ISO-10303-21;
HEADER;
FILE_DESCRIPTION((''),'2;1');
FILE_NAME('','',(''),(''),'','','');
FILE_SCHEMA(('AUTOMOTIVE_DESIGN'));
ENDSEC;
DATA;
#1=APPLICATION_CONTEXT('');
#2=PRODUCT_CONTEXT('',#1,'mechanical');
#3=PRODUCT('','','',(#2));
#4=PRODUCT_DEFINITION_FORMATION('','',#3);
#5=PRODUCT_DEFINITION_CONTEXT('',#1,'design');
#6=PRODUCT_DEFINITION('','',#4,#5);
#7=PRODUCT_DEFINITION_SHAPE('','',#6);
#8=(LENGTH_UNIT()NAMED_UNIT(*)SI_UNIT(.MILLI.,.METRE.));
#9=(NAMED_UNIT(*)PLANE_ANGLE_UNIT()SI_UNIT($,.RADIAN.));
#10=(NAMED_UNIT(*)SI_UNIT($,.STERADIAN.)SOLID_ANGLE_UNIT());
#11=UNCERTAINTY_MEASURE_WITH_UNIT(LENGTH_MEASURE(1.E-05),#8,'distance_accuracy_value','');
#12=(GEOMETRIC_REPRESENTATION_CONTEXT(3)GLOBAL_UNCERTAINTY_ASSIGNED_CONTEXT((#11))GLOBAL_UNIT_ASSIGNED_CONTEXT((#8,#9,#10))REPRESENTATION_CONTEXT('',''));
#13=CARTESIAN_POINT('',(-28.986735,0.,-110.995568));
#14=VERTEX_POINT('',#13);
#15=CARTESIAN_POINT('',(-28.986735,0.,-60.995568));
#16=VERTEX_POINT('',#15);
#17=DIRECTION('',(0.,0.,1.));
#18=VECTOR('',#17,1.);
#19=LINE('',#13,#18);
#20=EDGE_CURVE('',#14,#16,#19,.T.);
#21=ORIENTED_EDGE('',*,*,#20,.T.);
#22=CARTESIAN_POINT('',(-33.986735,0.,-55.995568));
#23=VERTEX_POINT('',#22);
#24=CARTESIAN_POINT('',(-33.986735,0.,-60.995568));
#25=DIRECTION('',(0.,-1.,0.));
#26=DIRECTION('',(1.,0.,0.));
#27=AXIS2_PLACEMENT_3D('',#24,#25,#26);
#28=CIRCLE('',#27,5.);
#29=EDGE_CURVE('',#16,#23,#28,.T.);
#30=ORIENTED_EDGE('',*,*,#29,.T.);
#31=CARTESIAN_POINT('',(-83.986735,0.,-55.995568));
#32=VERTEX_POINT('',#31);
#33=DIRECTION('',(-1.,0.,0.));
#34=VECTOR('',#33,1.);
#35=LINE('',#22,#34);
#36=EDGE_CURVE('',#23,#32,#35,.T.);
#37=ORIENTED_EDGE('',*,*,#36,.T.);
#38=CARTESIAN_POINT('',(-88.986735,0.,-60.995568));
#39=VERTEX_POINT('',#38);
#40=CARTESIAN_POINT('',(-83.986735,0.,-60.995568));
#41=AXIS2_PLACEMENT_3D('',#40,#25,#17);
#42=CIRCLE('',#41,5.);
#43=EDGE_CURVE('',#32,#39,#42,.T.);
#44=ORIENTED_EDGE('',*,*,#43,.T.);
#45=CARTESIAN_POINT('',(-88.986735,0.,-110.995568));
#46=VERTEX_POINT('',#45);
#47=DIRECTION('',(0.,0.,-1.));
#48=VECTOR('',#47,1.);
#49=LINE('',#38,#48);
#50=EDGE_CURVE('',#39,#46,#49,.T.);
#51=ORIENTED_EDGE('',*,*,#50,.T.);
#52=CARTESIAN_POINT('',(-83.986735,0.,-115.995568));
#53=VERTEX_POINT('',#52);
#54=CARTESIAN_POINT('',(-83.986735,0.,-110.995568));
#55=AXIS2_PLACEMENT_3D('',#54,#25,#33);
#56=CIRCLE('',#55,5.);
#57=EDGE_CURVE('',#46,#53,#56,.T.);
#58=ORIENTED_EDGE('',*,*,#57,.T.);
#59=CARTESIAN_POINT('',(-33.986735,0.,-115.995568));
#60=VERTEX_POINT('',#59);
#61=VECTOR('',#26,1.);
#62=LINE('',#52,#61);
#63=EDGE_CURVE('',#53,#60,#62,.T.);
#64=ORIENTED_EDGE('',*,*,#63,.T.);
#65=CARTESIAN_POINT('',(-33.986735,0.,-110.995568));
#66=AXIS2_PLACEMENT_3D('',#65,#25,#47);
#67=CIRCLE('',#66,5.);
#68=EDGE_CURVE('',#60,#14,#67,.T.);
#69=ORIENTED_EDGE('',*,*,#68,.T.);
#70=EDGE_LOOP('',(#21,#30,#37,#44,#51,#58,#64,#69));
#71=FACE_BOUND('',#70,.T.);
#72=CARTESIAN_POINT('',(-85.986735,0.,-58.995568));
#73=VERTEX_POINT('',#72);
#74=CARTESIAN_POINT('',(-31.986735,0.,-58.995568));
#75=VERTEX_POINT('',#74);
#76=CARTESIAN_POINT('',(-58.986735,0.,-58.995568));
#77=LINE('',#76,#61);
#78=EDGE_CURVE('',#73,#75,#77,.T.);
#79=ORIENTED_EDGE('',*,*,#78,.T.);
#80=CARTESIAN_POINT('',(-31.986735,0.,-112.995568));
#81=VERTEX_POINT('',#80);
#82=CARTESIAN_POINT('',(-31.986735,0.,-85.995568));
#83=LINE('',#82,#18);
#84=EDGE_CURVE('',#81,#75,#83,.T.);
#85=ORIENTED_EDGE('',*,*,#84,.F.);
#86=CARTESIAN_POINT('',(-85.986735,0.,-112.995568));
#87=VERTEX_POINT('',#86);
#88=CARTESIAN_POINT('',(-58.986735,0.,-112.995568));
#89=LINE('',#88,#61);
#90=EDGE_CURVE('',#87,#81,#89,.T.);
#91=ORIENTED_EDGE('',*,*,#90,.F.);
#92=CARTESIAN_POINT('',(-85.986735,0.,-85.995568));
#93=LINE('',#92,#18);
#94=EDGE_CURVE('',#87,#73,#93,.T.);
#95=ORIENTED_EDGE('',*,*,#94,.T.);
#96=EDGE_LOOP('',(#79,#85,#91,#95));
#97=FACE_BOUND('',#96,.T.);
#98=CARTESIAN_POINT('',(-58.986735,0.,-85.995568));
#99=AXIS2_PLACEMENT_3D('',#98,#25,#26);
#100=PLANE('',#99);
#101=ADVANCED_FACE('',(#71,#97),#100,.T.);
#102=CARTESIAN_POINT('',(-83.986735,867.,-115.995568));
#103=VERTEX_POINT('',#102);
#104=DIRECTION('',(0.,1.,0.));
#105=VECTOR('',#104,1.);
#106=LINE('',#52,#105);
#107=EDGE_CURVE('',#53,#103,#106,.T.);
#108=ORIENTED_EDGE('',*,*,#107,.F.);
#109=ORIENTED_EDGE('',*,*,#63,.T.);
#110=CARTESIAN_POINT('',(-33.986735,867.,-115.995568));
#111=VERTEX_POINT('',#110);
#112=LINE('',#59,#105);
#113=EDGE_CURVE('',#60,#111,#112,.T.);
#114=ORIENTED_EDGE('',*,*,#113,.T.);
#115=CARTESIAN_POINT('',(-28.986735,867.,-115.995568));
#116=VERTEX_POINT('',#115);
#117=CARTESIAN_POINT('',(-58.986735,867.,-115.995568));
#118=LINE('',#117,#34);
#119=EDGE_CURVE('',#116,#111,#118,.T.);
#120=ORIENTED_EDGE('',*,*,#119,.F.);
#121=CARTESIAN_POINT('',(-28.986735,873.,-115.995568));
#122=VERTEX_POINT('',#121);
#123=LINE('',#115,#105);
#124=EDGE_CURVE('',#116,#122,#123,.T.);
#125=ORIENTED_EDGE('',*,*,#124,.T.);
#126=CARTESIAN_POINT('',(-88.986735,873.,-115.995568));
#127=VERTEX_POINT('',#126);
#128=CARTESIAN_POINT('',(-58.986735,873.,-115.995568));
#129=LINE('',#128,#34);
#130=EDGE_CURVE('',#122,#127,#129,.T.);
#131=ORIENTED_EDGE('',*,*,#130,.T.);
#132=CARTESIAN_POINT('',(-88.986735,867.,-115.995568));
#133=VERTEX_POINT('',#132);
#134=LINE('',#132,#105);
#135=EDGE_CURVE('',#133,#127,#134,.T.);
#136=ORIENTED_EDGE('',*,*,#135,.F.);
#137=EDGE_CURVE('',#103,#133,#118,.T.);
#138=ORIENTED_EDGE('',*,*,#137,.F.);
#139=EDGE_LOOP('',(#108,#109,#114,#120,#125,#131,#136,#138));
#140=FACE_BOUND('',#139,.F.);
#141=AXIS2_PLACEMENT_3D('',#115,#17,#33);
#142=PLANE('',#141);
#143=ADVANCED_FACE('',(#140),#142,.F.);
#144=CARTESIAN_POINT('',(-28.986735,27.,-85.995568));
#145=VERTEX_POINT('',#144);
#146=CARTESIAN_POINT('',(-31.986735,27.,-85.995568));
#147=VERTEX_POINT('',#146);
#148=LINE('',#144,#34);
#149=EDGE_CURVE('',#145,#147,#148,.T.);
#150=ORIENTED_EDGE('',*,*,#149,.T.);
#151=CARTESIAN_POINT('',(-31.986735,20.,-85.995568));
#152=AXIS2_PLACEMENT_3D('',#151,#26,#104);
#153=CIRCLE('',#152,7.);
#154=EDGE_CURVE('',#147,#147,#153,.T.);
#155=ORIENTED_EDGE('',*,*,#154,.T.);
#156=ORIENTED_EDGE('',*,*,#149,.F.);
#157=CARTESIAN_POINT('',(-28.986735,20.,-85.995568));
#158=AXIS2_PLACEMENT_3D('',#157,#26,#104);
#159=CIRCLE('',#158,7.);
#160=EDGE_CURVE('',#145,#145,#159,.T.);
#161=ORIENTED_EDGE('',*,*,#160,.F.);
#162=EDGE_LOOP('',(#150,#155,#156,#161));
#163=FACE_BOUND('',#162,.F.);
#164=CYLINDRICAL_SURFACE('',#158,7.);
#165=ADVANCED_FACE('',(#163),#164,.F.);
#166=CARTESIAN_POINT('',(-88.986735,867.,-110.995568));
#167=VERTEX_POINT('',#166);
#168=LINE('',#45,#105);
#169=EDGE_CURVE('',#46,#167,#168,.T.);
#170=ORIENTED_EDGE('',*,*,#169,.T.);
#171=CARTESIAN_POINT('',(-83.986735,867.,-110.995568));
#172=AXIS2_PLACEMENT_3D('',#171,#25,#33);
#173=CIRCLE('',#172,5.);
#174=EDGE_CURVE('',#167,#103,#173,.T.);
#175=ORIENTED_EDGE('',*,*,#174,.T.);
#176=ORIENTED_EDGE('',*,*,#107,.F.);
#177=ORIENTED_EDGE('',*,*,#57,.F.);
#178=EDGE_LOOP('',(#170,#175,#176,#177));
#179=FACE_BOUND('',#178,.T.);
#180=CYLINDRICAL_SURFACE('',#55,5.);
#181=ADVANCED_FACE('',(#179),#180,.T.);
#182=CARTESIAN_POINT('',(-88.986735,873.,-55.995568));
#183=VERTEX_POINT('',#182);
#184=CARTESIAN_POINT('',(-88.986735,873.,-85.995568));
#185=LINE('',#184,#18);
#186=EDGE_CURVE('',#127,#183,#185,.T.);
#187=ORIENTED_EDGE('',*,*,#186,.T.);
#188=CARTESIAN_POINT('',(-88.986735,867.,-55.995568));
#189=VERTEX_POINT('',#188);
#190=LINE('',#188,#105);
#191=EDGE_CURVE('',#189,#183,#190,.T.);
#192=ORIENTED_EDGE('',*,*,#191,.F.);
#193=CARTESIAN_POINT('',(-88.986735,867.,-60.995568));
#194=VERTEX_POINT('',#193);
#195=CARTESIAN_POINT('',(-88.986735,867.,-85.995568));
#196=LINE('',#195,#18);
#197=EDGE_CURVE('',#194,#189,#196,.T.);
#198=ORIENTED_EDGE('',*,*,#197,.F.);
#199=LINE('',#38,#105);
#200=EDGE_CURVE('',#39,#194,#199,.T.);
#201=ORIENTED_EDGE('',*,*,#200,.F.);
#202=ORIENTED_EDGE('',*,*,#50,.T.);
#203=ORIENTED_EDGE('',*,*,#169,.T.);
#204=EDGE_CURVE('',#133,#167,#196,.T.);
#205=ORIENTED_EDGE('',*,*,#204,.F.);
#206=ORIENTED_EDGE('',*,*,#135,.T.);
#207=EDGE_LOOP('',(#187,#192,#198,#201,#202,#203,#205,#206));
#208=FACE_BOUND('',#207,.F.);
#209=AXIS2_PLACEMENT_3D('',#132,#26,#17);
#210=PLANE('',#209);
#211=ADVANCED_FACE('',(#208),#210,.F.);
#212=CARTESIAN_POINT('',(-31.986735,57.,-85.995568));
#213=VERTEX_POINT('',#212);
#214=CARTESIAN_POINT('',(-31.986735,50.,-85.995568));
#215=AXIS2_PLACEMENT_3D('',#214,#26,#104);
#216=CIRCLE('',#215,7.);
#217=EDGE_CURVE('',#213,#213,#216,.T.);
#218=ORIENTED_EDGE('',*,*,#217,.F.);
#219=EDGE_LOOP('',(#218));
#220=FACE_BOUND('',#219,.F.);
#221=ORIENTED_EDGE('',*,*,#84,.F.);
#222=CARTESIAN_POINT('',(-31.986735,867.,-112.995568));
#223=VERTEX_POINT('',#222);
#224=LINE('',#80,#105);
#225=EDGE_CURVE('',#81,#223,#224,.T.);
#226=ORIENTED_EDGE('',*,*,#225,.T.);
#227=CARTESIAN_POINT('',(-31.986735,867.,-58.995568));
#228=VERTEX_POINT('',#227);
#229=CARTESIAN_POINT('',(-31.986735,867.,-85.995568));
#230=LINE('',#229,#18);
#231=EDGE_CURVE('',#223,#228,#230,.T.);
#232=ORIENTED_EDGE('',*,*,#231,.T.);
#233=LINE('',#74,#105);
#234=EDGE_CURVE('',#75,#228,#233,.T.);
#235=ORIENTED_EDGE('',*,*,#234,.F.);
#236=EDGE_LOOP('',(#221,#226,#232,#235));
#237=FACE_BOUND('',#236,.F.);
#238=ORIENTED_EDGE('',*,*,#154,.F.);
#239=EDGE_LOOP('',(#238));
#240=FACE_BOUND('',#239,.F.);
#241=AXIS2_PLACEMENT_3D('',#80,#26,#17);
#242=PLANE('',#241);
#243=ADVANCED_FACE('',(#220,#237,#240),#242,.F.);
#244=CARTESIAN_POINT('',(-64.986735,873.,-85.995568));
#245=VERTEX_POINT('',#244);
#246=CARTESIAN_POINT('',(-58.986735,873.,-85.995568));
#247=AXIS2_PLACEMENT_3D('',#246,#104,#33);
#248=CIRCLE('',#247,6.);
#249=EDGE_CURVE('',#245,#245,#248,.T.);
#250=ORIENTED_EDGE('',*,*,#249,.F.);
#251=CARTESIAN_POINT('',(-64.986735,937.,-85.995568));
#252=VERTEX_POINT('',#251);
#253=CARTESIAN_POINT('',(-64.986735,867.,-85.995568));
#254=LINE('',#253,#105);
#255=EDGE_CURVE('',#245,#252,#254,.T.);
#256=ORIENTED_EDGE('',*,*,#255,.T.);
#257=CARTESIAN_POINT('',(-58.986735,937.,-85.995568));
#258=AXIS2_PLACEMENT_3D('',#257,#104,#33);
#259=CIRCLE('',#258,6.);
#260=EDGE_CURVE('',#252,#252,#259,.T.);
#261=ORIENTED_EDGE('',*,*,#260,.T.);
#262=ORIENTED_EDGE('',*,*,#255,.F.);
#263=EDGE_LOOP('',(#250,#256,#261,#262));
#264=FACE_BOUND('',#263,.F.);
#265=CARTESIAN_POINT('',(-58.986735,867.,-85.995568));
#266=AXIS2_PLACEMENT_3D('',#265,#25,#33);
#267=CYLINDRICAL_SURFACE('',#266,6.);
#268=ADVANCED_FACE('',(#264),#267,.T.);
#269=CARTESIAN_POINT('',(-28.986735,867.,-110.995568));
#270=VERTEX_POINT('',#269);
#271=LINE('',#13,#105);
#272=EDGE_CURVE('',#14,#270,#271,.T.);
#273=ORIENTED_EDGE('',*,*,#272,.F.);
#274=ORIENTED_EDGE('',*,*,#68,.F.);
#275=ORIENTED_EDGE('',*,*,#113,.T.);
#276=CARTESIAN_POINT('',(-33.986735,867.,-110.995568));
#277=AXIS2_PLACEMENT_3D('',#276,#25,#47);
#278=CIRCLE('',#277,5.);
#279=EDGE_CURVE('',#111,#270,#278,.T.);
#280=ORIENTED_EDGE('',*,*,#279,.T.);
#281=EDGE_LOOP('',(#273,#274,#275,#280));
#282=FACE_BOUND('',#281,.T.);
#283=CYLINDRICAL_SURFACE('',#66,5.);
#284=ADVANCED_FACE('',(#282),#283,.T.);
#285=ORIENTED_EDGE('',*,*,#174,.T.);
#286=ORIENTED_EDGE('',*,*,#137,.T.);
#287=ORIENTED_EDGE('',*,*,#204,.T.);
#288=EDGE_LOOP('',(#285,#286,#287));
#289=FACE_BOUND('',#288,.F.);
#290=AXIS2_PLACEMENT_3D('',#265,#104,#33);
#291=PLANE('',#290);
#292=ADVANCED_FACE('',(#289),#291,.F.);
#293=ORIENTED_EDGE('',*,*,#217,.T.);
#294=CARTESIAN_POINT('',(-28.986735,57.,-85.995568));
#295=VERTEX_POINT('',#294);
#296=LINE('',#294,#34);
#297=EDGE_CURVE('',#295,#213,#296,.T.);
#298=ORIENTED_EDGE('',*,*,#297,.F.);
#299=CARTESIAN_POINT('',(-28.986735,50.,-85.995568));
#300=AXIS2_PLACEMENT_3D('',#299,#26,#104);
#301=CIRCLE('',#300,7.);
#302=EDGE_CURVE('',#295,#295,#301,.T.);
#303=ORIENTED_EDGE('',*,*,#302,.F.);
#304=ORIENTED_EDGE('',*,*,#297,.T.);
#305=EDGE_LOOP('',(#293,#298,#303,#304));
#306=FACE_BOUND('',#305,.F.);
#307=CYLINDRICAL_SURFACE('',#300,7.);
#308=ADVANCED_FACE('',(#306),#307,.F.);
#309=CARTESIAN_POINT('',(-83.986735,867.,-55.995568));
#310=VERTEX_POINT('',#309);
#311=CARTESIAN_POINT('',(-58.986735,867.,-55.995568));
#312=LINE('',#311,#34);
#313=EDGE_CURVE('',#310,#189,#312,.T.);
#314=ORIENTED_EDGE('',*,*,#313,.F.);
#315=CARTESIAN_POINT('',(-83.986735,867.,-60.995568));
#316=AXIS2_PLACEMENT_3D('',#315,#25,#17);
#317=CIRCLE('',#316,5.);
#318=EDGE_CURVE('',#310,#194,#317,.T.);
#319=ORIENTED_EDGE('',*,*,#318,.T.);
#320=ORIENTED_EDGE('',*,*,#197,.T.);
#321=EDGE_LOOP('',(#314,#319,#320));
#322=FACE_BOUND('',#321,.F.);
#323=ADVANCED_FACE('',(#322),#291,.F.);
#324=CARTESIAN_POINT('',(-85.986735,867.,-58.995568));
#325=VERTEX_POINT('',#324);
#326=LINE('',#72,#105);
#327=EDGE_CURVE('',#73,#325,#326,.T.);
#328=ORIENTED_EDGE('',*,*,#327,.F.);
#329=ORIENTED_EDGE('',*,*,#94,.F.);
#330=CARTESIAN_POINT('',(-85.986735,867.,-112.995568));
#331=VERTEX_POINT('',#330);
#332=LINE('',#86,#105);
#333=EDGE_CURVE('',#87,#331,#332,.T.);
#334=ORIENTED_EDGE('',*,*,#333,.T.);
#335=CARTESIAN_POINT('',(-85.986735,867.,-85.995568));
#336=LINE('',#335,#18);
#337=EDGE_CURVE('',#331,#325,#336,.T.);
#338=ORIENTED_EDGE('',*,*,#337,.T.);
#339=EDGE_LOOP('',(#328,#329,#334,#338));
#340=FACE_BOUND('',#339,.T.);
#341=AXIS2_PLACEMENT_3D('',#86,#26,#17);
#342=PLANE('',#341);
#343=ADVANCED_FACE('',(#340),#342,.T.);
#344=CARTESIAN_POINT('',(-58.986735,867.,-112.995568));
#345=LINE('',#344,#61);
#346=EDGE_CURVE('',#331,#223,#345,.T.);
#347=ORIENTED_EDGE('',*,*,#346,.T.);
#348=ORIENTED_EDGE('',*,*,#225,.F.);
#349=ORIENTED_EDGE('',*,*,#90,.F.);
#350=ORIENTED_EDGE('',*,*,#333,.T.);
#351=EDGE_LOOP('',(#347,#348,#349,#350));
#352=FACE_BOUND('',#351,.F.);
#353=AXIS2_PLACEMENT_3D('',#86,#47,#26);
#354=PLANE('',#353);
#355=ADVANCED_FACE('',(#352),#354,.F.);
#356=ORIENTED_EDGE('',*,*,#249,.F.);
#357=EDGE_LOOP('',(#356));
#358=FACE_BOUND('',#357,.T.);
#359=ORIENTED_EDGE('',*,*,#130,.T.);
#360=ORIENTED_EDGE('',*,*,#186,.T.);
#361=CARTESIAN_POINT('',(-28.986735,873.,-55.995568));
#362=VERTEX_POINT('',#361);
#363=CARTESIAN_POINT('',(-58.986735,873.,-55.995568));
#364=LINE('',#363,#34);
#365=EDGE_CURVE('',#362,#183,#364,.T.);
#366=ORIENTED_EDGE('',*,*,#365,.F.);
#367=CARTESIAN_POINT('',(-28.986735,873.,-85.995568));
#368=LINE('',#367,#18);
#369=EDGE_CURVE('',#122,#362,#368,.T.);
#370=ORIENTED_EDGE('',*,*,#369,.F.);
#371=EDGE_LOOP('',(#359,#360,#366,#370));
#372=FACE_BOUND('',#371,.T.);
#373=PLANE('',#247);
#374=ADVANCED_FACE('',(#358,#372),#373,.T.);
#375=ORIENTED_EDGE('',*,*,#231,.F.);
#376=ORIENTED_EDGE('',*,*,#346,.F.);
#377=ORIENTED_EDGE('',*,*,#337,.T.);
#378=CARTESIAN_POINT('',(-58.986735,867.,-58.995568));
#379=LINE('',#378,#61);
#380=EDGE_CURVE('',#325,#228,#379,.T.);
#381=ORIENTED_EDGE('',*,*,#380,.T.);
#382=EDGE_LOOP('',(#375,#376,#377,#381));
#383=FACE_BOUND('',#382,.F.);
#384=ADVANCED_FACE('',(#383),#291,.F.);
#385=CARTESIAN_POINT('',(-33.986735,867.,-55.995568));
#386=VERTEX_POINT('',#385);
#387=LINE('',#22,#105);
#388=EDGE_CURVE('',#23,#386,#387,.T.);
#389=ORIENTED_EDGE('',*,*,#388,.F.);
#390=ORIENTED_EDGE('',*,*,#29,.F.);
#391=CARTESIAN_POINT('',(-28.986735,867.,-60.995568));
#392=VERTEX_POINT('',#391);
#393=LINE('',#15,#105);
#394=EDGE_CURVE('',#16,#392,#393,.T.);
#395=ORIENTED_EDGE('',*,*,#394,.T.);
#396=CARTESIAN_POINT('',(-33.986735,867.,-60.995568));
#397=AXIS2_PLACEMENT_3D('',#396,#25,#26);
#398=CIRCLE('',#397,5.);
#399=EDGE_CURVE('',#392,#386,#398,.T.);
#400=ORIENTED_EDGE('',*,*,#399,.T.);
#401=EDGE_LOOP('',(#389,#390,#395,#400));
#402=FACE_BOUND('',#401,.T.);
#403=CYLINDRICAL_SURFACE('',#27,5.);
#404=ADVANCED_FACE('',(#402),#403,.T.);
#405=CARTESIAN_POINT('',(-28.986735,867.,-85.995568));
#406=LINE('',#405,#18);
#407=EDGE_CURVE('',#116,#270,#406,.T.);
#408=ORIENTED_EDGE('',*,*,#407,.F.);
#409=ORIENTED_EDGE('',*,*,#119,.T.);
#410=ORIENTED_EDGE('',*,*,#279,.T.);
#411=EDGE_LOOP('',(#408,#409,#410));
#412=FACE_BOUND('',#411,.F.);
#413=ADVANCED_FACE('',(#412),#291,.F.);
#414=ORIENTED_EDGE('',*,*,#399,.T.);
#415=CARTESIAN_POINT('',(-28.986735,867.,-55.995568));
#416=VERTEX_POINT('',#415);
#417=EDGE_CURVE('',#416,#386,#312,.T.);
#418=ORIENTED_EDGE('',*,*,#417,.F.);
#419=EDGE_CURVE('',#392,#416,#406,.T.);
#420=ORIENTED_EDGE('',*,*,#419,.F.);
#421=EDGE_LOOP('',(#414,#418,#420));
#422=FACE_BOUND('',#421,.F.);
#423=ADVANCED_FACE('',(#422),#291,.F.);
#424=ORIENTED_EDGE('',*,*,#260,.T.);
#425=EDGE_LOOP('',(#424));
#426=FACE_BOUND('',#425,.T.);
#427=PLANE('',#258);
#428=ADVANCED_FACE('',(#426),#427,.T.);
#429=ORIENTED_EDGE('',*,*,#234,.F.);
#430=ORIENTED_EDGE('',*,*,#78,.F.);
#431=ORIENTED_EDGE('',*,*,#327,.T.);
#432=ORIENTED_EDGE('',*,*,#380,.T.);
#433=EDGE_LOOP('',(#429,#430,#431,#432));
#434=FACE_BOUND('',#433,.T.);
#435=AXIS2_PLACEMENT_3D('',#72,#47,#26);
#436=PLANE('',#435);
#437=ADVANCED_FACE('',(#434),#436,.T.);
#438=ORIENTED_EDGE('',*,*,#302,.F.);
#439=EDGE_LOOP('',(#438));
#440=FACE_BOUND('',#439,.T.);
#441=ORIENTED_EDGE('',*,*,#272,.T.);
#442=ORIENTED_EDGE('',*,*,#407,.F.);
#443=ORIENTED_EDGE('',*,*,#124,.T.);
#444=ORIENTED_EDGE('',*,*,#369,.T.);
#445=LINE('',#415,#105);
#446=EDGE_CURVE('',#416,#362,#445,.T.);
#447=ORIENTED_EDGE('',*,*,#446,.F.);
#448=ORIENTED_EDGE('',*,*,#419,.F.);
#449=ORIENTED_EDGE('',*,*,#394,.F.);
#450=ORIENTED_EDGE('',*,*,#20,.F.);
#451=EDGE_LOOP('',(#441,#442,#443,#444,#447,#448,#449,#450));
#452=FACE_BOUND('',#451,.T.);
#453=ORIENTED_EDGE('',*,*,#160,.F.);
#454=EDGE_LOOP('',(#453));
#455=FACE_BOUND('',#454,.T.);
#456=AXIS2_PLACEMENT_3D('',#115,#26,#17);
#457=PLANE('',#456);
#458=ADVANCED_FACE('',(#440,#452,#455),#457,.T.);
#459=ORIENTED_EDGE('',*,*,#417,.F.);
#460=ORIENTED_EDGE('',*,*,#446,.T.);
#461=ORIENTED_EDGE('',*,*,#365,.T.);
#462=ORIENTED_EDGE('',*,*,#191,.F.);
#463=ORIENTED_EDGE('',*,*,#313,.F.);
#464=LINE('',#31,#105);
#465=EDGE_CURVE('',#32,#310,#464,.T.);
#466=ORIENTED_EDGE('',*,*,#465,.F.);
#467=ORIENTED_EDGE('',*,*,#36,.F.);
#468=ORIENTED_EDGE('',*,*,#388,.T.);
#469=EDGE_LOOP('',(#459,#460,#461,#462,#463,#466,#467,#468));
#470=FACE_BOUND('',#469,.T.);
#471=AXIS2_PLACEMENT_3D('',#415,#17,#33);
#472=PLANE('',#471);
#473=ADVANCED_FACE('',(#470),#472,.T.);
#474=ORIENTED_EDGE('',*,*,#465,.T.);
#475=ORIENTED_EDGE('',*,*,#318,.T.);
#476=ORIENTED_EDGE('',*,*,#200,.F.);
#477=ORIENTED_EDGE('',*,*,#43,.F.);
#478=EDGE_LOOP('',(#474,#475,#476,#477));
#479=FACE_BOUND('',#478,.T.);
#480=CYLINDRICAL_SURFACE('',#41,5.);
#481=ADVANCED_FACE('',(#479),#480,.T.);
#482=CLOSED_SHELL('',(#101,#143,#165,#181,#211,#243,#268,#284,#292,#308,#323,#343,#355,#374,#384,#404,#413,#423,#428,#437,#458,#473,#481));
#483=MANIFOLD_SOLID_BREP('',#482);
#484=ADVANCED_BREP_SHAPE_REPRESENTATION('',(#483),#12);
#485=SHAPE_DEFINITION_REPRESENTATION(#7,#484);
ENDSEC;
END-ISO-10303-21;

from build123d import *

# Parameters (mm, degrees)
F0_W     = 54
F0_H     = 54
F1_DEPTH = 867
F2_R     = 7
F3_DEPTH = 3
F4_W     = 60
F4_H     = 60
F4_R     = 6
F5_DEPTH = 6
F7_R     = 6
F8_DEPTH = 70


# Not quite as in the source:
# - a feature names something its author has since deleted; it is built from what else it names


with BuildPart() as f1:
    # F0 (on Front) → F1 (new body)
    with BuildSketch(Plane.XZ):
        with BuildLine():
            ThreePointArc((-28.9867345989, -60.995567819), (-30.4512006929, -57.460033913), (-33.9867345989, -55.995567819))
            Line((-33.9867345989, -55.995567819), (-83.9867345989, -55.995567819))
            ThreePointArc((-83.9867345989, -55.995567819), (-87.5222685048, -57.460033913), (-88.9867345989, -60.995567819))
            Line((-88.9867345989, -60.995567819), (-88.9867345989, -110.995567819))
            ThreePointArc((-88.9867345989, -110.995567819), (-87.5222685048, -114.5311017249), (-83.9867345989, -115.995567819))
            Line((-83.9867345989, -115.995567819), (-33.9867345989, -115.995567819))
            ThreePointArc((-33.9867345989, -115.995567819), (-30.4512006929, -114.5311017249), (-28.9867345989, -110.995567819))
            Line((-28.9867345989, -110.995567819), (-28.9867345989, -60.995567819))
        make_face()
        with Locations((-58.9867345989, -85.995567819)):
            Rectangle(F0_W, F0_H, mode=Mode.SUBTRACT)
    extrude(amount=-F1_DEPTH)

    # F2 (on face) → F3 (cut, through all)
    with BuildSketch(Plane.YZ.offset(-28.9867345989)):
        with Locations((20, -85.995567819)):
            Circle(F2_R)
        with Locations((50, -85.995567819)):
            Circle(F2_R)
    extrude(amount=-F3_DEPTH, mode=Mode.SUBTRACT)

    # F4 (on face) → F5 (join)
    with BuildSketch(Plane(origin=(0, 867, 0), x_dir=(-1, 0, 0), z_dir=(0, 1, 0))):
        with Locations((58.9867345989, -85.995567819)):
            Rectangle(F4_W, F4_H)
        with Locations((58.9867345989, -85.995567819)):
            Circle(F4_R, mode=Mode.SUBTRACT)
    extrude(amount=F5_DEPTH)

    # F7 (on offset) → F8 (join)
    with BuildSketch(Plane(origin=(0, 867, 0), x_dir=(-1, 0, 0), z_dir=(0, 1, 0))):
        with Locations((58.9867345989, -85.995567819)):
            Circle(F7_R)
    extrude(amount=F8_DEPTH)


solid = f1.part
